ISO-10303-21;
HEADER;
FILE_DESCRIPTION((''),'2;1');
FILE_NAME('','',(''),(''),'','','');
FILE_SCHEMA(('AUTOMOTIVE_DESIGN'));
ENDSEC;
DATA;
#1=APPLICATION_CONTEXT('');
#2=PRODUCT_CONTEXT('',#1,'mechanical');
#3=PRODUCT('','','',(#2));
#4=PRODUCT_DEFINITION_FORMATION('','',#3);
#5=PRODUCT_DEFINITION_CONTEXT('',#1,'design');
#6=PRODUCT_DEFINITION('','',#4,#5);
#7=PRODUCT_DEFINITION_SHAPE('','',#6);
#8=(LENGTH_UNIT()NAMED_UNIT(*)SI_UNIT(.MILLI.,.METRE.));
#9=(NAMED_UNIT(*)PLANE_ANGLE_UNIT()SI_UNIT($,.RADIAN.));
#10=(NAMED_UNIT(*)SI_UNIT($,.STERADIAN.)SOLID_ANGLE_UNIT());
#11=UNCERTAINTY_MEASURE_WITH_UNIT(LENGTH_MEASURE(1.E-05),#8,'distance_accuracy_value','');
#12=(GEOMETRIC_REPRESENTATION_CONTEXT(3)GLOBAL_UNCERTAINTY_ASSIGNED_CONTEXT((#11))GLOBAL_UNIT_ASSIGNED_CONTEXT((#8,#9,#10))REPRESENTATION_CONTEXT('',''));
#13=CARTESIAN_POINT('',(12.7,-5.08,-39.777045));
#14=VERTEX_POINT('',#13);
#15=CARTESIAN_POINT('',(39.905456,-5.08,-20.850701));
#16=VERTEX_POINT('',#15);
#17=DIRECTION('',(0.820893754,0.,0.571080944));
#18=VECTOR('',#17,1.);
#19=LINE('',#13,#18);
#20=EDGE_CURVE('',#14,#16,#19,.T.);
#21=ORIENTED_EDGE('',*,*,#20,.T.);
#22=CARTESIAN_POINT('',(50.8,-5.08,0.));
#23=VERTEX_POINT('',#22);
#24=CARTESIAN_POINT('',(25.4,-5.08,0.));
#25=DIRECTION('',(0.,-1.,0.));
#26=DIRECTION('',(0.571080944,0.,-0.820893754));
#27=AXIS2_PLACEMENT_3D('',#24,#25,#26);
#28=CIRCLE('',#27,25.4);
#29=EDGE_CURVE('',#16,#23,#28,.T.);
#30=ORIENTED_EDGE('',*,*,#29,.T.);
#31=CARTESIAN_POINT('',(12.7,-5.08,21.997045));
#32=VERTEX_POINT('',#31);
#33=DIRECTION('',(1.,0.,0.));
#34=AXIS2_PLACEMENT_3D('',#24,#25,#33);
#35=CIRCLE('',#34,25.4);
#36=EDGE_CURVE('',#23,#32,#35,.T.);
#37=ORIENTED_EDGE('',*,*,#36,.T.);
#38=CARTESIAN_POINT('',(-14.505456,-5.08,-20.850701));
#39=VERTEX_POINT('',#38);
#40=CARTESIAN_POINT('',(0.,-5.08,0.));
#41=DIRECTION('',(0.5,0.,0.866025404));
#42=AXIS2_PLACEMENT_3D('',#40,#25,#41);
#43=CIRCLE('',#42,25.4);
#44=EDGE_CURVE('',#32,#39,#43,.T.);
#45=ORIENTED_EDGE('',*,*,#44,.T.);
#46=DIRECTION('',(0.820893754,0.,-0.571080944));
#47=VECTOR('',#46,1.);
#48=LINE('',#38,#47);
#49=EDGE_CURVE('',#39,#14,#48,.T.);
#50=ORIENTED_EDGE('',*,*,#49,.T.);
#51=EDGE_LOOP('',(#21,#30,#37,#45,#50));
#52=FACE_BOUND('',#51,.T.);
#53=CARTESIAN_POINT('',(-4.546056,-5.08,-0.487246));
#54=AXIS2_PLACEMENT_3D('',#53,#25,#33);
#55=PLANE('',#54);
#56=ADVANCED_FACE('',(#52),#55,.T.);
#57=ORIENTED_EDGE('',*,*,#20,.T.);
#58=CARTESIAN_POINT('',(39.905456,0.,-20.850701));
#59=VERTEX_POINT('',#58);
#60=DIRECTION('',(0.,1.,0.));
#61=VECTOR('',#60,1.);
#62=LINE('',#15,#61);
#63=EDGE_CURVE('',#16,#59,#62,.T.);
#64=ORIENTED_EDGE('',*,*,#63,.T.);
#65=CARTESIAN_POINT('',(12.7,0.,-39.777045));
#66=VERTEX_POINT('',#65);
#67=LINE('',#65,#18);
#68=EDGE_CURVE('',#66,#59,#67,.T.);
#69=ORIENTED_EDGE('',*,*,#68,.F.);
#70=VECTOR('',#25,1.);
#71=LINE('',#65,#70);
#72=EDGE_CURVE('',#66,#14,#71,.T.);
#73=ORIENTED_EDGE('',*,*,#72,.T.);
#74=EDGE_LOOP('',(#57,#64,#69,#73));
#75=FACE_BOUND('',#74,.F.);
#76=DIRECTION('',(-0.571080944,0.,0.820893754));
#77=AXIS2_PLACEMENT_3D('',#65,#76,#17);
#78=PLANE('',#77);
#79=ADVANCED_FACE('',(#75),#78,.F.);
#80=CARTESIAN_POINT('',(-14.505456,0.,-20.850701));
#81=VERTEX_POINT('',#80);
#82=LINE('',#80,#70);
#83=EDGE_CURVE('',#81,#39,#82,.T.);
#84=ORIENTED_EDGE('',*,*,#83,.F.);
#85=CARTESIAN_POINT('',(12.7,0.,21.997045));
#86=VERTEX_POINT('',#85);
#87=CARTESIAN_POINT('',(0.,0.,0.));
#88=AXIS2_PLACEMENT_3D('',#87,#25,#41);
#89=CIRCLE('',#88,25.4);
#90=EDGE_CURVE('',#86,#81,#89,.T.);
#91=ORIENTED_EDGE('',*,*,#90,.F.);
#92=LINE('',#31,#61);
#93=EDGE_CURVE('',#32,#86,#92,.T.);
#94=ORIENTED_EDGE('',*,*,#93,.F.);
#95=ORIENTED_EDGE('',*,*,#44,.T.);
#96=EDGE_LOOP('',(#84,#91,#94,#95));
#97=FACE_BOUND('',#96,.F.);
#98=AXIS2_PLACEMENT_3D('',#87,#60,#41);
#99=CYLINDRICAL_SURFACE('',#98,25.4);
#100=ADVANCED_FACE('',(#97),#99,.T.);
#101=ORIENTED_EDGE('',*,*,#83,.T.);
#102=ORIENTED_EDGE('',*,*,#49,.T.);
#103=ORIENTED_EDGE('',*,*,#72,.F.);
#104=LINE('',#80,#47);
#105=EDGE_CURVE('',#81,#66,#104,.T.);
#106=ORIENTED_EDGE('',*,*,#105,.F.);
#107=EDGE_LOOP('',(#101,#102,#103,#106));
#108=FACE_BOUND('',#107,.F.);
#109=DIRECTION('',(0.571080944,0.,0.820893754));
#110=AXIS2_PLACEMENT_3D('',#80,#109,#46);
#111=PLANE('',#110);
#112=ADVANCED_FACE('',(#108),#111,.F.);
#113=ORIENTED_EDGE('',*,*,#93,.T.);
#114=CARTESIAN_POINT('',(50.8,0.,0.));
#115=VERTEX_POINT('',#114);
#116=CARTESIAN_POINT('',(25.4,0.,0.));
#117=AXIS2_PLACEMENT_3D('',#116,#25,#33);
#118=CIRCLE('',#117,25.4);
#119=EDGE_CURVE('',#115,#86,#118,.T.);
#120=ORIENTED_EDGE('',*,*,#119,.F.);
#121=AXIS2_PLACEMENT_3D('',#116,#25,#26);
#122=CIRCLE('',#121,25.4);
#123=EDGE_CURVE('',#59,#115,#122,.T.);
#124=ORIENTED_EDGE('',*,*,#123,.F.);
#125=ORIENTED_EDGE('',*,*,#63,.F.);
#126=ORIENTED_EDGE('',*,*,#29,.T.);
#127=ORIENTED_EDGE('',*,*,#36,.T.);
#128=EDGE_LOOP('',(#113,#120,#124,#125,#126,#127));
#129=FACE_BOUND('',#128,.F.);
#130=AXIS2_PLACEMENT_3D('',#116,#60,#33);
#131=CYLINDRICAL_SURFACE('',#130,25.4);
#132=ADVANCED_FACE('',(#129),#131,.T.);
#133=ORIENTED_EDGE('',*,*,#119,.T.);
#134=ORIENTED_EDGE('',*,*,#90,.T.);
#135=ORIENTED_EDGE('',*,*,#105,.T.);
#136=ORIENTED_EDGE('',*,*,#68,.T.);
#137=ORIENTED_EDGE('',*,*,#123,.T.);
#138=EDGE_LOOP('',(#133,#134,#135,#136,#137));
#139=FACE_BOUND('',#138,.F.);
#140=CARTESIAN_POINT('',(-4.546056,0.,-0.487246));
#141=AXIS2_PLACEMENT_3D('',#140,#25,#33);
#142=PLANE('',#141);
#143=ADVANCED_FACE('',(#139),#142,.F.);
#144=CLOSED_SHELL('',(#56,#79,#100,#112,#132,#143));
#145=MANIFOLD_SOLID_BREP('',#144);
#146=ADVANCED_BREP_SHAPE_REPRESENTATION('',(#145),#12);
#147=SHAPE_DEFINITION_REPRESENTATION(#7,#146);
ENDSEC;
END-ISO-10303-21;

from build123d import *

# Parameters (mm, degrees)
F1_DEPTH = 2.54
F2_DEPTH = 5.08


# Not quite as in the source:
# - a feature names something its author has since deleted; it is built from what else it names


with BuildPart() as f1:
    # F0 (on Front) → F1 (new body)
    with BuildSketch(Plane.XZ):
        with BuildLine():
            ThreePointArc((25.4, 0), (21.9970452561, -12.7), (12.7, -21.9970452561))
            ThreePointArc((12.7, -21.9970452561), (26.4693193728, -25.3774812793), (39.9054559874, -20.8507013455))
            ThreePointArc((39.9054559874, -20.8507013455), (47.9122031583, -11.762682898), (50.8, 0))
            ThreePointArc((50.8, 0), (38.1, 21.9970452561), (12.7, 21.9970452561))
            ThreePointArc((12.7, 21.9970452561), (21.9970452561, 12.7), (25.4, 0))
        make_face()
        with BuildLine():
            ThreePointArc((12.7, 21.9970452561), (0, 0), (12.7, -21.9970452561))
            ThreePointArc((12.7, -21.9970452561), (21.9970452561, -12.7), (25.4, 0))
            ThreePointArc((25.4, 0), (21.9970452561, 12.7), (12.7, 21.9970452561))
        make_face()
    extrude(amount=F1_DEPTH)

    # F0 (on Front) → F2 (join)
    with BuildSketch(Plane.XZ):
        with BuildLine():
            ThreePointArc((12.7, 21.9970452561), (-21.4428837855, 13.6147983812), (-14.5054559874, -20.8507013455))
            ThreePointArc((-14.5054559874, -20.8507013455), (-1.0693193728, -25.3774812793), (12.7, -21.9970452561))
            ThreePointArc((12.7, -21.9970452561), (0, 0), (12.7, 21.9970452561))
        make_face()
        with BuildLine():
            ThreePointArc((12.7, -21.9970452561), (-1.0693193728, -25.3774812793), (-14.5054559874, -20.8507013455))
            Line((-14.5054559874, -20.8507013455), (12.7, -39.7770452561))
            Line((12.7, -39.7770452561), (12.7, -21.9970452561))
        make_face()
        with BuildLine():
            ThreePointArc((12.7, 21.9970452561), (0, 0), (12.7, -21.9970452561))
            ThreePointArc((12.7, -21.9970452561), (21.9970452561, -12.7), (25.4, 0))
            ThreePointArc((25.4, 0), (21.9970452561, 12.7), (12.7, 21.9970452561))
        make_face()
        with BuildLine():
            ThreePointArc((25.4, 0), (21.9970452561, -12.7), (12.7, -21.9970452561))
            ThreePointArc((12.7, -21.9970452561), (26.4693193728, -25.3774812793), (39.9054559874, -20.8507013455))
            ThreePointArc((39.9054559874, -20.8507013455), (47.9122031583, -11.762682898), (50.8, 0))
            ThreePointArc((50.8, 0), (38.1, 21.9970452561), (12.7, 21.9970452561))
            ThreePointArc((12.7, 21.9970452561), (21.9970452561, 12.7), (25.4, 0))
        make_face()
        with BuildLine():
            ThreePointArc((39.9054559874, -20.8507013455), (26.4693193728, -25.3774812793), (12.7, -21.9970452561))
            Line((12.7, -21.9970452561), (12.7, -39.7770452561))
            Line((12.7, -39.7770452561), (39.9054559874, -20.8507013455))
        make_face()
    extrude(amount=F2_DEPTH)


solid = f1.part
